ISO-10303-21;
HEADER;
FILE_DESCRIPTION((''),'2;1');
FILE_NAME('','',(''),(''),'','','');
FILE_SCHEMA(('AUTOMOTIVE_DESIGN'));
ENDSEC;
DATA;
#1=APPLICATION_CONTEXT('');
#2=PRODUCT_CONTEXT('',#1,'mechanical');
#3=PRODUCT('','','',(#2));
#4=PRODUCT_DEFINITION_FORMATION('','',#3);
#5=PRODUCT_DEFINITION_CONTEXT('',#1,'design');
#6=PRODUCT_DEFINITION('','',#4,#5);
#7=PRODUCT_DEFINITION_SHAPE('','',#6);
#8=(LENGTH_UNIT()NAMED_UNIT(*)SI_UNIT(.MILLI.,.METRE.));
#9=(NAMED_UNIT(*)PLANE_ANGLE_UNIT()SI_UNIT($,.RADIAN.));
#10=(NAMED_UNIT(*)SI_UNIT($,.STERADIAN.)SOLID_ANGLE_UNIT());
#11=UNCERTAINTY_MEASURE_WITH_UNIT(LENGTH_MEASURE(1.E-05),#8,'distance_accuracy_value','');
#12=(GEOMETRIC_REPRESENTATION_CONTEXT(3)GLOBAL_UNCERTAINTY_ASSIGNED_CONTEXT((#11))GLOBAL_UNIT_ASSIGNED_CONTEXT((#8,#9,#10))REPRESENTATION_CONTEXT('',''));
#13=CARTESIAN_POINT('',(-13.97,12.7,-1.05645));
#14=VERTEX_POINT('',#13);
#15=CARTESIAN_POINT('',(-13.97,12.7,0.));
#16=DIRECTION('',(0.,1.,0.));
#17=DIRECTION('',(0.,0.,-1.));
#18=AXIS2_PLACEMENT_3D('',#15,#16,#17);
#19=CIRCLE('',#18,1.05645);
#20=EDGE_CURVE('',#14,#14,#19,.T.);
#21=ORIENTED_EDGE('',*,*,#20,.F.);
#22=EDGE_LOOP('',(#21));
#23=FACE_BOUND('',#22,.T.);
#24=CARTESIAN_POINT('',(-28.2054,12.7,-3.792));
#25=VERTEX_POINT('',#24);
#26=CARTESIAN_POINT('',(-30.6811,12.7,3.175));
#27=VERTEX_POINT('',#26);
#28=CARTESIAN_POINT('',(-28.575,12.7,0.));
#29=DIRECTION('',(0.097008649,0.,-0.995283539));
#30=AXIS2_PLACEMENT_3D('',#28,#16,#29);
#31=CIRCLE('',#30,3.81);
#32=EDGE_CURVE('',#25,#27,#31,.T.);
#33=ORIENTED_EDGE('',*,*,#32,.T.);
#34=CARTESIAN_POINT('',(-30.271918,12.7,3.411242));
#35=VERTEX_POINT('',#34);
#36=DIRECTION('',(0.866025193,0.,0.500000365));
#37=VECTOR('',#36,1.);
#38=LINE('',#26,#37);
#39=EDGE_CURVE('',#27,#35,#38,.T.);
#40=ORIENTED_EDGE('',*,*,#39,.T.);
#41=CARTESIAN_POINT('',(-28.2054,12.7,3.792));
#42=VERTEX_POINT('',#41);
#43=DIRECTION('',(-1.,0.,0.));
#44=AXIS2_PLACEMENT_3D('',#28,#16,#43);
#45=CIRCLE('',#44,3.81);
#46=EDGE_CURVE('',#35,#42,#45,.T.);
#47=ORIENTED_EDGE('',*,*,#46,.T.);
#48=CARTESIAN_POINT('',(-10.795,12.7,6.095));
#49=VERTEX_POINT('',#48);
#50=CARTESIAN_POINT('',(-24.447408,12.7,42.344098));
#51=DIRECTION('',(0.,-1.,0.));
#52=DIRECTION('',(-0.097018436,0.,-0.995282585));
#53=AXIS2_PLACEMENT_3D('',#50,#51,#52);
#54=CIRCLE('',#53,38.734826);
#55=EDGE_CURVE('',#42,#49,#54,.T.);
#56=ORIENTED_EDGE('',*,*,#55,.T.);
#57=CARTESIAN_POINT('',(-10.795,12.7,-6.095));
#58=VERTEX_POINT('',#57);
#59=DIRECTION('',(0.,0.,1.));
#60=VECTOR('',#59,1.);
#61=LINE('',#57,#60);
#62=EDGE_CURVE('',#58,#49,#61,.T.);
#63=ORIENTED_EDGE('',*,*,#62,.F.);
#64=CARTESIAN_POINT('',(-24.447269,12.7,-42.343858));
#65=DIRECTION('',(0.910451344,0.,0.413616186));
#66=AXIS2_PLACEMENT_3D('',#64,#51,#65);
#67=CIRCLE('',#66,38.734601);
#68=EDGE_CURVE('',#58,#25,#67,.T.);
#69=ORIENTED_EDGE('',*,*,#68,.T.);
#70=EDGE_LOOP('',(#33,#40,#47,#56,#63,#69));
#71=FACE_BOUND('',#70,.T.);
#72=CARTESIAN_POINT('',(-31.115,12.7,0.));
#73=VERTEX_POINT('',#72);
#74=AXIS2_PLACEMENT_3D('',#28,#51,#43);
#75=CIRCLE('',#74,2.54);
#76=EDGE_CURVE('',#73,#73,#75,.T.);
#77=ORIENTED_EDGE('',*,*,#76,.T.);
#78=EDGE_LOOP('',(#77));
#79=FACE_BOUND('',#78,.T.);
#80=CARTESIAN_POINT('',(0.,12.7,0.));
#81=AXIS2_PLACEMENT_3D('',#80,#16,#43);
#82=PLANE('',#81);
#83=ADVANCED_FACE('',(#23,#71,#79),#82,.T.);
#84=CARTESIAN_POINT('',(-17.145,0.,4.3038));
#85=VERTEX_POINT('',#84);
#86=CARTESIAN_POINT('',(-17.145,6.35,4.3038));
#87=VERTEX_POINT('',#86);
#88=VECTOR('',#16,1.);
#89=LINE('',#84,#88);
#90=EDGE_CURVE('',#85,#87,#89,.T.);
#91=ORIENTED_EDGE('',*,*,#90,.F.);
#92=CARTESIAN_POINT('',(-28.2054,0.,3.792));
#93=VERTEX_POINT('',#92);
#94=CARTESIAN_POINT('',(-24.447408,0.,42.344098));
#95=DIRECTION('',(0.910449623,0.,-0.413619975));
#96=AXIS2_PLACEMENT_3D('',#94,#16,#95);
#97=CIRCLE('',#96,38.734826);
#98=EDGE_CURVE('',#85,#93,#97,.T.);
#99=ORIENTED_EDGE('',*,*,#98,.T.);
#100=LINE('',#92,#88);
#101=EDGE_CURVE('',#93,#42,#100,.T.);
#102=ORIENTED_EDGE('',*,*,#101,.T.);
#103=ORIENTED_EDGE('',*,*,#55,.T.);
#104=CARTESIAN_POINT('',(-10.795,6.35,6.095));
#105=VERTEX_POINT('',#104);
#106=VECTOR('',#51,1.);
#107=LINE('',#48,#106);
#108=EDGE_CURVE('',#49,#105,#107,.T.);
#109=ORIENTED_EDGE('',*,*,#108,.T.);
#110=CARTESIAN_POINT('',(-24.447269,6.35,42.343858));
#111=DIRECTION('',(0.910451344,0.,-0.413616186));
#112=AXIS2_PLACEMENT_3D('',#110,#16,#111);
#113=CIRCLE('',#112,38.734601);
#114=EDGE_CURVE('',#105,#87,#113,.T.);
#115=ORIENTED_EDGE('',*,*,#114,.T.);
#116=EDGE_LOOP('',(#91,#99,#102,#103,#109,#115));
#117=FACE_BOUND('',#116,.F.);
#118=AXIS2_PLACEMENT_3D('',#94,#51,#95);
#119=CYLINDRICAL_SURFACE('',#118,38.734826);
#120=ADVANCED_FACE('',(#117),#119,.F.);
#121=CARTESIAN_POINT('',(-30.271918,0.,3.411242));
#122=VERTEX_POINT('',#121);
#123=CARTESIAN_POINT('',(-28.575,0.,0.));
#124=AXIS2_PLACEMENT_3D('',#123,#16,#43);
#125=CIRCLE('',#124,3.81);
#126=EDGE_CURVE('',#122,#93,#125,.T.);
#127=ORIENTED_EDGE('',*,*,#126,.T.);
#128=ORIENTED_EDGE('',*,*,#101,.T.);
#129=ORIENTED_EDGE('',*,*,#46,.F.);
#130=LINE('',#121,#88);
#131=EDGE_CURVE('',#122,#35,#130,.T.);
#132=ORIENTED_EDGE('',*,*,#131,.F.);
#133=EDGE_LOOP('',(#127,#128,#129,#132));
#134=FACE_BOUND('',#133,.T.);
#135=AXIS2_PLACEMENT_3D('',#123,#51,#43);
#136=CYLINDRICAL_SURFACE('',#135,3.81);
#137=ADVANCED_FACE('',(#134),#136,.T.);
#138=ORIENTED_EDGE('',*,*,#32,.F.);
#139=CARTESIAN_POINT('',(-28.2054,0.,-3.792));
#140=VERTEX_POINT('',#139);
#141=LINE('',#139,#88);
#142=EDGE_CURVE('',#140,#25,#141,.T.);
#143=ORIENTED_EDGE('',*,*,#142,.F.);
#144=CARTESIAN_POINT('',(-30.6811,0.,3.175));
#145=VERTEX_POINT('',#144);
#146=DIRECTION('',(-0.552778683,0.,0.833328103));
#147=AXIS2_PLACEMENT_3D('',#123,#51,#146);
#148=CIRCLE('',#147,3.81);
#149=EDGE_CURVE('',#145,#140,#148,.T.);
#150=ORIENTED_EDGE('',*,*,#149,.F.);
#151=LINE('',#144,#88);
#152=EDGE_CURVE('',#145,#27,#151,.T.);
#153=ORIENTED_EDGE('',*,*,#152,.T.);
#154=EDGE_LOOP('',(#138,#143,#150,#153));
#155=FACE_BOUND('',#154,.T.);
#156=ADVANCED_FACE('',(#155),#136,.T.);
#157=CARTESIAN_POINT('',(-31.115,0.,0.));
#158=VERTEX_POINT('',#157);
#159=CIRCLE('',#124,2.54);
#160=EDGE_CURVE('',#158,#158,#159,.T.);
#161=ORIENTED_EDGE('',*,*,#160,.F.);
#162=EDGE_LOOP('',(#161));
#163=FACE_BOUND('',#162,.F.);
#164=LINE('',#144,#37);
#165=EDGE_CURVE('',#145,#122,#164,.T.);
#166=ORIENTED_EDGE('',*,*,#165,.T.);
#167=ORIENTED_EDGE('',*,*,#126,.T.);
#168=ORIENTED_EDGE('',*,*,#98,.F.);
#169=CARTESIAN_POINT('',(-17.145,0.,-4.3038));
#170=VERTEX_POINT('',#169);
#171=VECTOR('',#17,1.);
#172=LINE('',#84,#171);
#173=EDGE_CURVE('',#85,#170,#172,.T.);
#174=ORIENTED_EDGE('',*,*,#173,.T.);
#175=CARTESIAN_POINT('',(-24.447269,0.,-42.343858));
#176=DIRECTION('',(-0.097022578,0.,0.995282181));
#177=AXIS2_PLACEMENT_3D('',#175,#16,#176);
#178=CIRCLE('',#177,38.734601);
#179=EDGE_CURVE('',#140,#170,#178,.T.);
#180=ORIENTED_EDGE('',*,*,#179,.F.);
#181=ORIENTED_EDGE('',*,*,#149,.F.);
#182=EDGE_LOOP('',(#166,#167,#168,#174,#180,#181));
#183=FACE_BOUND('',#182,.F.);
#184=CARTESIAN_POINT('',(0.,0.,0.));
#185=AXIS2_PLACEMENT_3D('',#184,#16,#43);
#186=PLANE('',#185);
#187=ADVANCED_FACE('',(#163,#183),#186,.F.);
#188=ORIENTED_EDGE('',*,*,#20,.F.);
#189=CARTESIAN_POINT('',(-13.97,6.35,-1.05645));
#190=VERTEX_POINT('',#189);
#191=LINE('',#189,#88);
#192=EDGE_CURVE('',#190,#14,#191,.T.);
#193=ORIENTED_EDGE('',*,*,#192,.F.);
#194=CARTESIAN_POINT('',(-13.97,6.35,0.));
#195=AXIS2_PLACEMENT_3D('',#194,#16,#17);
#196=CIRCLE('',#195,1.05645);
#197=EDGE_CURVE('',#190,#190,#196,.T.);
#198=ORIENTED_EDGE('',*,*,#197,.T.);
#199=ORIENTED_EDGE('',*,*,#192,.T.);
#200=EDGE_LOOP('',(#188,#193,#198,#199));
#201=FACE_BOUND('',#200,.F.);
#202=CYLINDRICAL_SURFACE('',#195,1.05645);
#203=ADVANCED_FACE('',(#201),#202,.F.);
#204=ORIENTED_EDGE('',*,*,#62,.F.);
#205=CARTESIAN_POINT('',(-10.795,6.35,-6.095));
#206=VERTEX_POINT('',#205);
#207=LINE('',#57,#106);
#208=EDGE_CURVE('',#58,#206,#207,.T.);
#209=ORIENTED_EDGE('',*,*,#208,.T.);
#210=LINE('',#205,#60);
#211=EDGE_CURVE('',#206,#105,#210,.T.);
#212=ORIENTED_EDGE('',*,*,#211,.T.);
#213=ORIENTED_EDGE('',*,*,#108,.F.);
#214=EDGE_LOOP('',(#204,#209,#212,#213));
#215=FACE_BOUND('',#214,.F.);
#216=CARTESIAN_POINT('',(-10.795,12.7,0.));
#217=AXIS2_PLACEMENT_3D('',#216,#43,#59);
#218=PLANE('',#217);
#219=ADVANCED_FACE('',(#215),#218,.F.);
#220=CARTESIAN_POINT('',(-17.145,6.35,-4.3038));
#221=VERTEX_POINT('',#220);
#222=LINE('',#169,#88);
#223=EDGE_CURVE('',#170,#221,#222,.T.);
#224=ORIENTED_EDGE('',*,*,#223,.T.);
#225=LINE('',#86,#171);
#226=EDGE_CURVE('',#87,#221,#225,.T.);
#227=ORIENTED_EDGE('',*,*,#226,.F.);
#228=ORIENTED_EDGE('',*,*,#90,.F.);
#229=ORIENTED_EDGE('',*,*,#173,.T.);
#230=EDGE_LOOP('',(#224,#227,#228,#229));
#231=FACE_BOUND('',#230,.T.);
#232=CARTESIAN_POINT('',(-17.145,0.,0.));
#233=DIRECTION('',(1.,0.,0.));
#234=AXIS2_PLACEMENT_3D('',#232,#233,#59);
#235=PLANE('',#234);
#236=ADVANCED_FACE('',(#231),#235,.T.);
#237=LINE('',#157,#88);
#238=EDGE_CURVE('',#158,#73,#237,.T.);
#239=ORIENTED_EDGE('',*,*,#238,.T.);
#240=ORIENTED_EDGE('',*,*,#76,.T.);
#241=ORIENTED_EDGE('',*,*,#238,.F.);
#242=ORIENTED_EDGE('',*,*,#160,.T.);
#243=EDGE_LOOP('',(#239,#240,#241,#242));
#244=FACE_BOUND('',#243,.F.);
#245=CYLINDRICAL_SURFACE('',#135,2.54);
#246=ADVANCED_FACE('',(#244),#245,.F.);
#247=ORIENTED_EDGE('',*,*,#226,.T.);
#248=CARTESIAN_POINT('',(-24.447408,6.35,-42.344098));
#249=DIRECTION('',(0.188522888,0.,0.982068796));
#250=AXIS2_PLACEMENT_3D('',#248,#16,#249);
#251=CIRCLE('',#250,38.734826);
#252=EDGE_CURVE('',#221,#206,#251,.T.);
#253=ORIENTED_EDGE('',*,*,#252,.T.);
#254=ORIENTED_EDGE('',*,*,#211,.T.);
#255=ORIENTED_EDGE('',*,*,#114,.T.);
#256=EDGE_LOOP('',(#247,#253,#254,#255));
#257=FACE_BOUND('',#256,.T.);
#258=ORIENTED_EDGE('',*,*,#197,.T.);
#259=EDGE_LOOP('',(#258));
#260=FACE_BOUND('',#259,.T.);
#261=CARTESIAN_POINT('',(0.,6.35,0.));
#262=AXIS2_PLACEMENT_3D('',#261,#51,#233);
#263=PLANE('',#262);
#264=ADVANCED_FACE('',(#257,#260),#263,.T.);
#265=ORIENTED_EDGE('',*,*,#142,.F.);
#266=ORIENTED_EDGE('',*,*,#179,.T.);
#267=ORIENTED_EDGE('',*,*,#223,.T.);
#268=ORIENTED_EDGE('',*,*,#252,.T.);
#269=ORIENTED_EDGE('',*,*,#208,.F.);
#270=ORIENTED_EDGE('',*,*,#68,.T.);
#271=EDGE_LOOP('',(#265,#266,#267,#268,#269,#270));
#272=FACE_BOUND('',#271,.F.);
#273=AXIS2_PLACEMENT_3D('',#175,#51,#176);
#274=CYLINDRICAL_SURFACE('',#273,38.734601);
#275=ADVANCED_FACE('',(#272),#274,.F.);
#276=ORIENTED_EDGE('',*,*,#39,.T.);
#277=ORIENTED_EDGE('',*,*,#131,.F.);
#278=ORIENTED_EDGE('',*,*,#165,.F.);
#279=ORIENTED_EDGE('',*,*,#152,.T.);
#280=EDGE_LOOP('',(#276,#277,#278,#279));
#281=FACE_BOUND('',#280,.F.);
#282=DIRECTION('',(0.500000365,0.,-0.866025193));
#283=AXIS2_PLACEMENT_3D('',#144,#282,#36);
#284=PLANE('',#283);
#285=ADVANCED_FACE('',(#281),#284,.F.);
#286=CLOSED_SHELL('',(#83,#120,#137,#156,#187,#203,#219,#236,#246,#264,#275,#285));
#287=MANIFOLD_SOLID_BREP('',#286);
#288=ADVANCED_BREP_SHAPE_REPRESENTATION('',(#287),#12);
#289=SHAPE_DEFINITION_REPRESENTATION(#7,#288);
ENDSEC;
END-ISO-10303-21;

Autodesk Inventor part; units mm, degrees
ref_plane "YZ Plane" through (0, 0, 0) normal (1, 0, 0) x (0, 1, 0)
ref_plane "XZ Plane" through (0, 0, 0) normal (0, 1, 0) x (-1, 0, 0)
ref_plane "XY Plane" through (0, 0, 0) normal (0, 0, 1) x (1, 0, 0)
sketch "Sketch1" plane through (0, 0, 0) normal (0, 1, 0) x (-1, 0, 0)
  line L0 (0, 0) -> (28.575, 0)
  line L1 (28.575, 0) -> (0, 0)
  line L2 (0, 0) -> (-14.2875, -24.7467)
  line L3 (0, 0) -> (28.575, 0) construction
  line L4 (0, 0) -> (-14.2875, 24.7467)
  line L5 (0, 0) -> (28.575, 0) construction
  circle A0 centre (28.575, 0) radius 2.54
  circle A1 centre (-14.2875, -24.7467) radius 2.54
  circle A2 centre (-14.2875, 24.7467) radius 2.54
  circle A3 centre (0, 0) radius 3.175
  circle A4 centre (0, 0) radius 6.35
  line L6 (-1.5875, -2.7496) -> (0, 0)
  line L7 (0, 0) -> (-6.35, 0)
  circle A5 centre (-14.2875, 24.7467) radius 3.81
  circle A6 centre (28.575, 0) radius 3.81
  circle A7 centre (-14.2875, -24.7467) radius 3.81
  line L8 (30.6811, 3.175) -> (-12.1814, 27.9217)
  line L9 (28.2054, -3.792) -> (-10.8187, -26.3226)
  line L10 (-18.0975, 24.7467) -> (-18.0975, -24.7467)
  line L11 (0, 0) -> (5.0525, -8.8146)
  line L12 (0, 0) -> (5.1463, 8.7602)
  line L13 (0, 0) -> (-10.16, 0)
  arc A8 (28.2054, -3.792) -> (-10.8187, -26.3226) centre (24.4473, -42.344) ccw
  arc A9 (-10.8187, 26.3226) -> (28.2054, 3.792) centre (24.4473, 42.344) ccw
  arc A10 (-17.3867, -22.5305) -> (-17.3867, 22.5305) centre (-48.8947, 0) ccw
  point P0 (5.1074, 8.7829)
  point P1 (-10.16, 0.0317)
  point P2 (30.2716, 3.4114)
  point P3 (28.2054, 3.792)
  point P4 (-10.8187, 26.3226)
  point P5 (-17.3867, 22.5305)
  point P6 (-17.3867, -22.5305)
  dimension "d9" = 6.35
  dimension "d41" = 12.7
  dimension "d0" = 28.575
  dimension "d1" = 28.575
  dimension "d2" = 120
  dimension "d3" = 28.575
  dimension "d4" = 120
  dimension "d5" = 5.08
  dimension "d6" = 5.08
  dimension "d7" = 5.08
  dimension "d42" = 7.62
  dimension "d43" = 7.62
  dimension "d44" = 7.62
  dimension "d47" = 10.16
  dimension "d48" = 10.16
  dimension "d49" = 10.16
  dimension "d52" = 360
extrude "Extrusion4" add sketch "Sketch1" along normal blind 12.7 contours A3 L12 A4 L0 | L0 A4 L11 A3 | A3 L11 A4 L2 | L2 A4 L7 A3 | A3 L7 A4 L4 | L4 A4 L12 A3 | A4 L12 A9 A6 L0 | L0 A6 A8 L11 A4 | A4 L11 A8 A7 L2 | L2 A7 A10 L13 A4 | A4 L13 A10 A5 L4 | L4 A5 A9 L12 A4 | A6 L8 | A7 | A5 picked at (31.8987, 0.5122)
sketch "Sketch21" plane through (0, 12.7, 0) normal (0, 1, 0) x (1, 0, 0)
  circle A0 centre (-28.575, 0) radius 2.54 projected
  arc A1 (-28.2054, 3.792) -> (10.8187, 26.3226) centre (-24.4473, 42.344) ccw projected
  arc A2 (10.8187, -26.3226) -> (-28.2054, -3.792) centre (-24.4473, -42.344) ccw projected
  arc A3 (-28.2054, 3.792) -> (10.8187, 26.3226) centre (-24.4473, 42.344) ccw projected
  arc A4 (-28.2054, 3.792) -> (-30.6811, -3.175) centre (-28.575, 0) ccw projected
  line L0 (-30.6811, -3.175) -> (-30.2716, -3.4114) projected
  arc A5 (-30.2716, -3.4114) -> (-28.2054, -3.792) centre (-28.575, 0) ccw projected
  arc A6 (10.8187, -26.3226) -> (-28.2054, -3.792) centre (-24.4473, -42.344) ccw projected
  arc A7 (10.8187, -26.3226) -> (17.3867, -22.5305) centre (14.2875, -24.7467) ccw projected
  arc A8 (17.3867, 22.5305) -> (17.3867, -22.5305) centre (48.8947, 0) ccw projected
  arc A9 (17.3867, 22.5305) -> (10.8187, 26.3226) centre (14.2875, 24.7467) ccw projected
  circle A10 centre (-28.575, 0) radius 2.54 projected
  circle A11 centre (0, 0) radius 3.175 projected
  circle A12 centre (14.2875, -24.7467) radius 2.54 projected
  circle A13 centre (14.2875, 24.7467) radius 2.54 projected
  line L1 (0, 0) -> (-13.6784, 0)
  line L2 (-13.6784, 0) -> (-28.575, 0)
  line L3 (0, 0) -> (-10.795, 0)
  line L4 (-10.795, 0) -> (-10.795, 6.095)
  arc A14 (-28.2054, 3.792) -> (10.8187, 26.3226) centre (-24.4473, 42.344) ccw projected
  line L5 (-10.795, 0) -> (-10.795, -6.095)
  point P0 (10.8187, -26.3226)
  point P1 (10.8187, 26.3226)
  dimension "d107" = 10.795
sketch "Sketch22" plane through (0, 0, 0) normal (0, -1, 0) x (1, 0, 0)
  line L0 (0, 0) -> (-17.145, 0)
  line L1 (-17.145, 0) -> (-17.145, -4.3038)
  arc A0 (10.8187, -26.3226) -> (-28.2054, -3.792) centre (-24.4473, -42.344) ccw projected
  line L2 (-17.145, 0) -> (-17.145, 4.3038)
  arc A1 (-28.2054, 3.792) -> (10.8187, 26.3226) centre (-24.4473, 42.344) ccw projected
  arc A2 (10.8187, -26.3226) -> (-28.2054, -3.792) centre (-24.4473, -42.344) ccw projected
  arc A3 (10.8187, -26.3226) -> (17.3867, -22.5305) centre (14.2875, -24.7467) ccw projected
  arc A4 (17.3867, 22.5305) -> (17.3867, -22.5305) centre (48.8947, 0) ccw projected
  arc A5 (17.3867, 22.5305) -> (10.8187, 26.3226) centre (14.2875, 24.7467) ccw projected
  arc A6 (-28.2054, 3.792) -> (10.8187, 26.3226) centre (-24.4473, 42.344) ccw projected
  arc A7 (-28.2054, 3.792) -> (-30.2716, 3.4114) centre (-28.575, 0) ccw projected
  line L3 (-30.6811, 3.175) -> (-30.2716, 3.4114) projected
  arc A8 (-30.6811, 3.175) -> (-28.2054, -3.792) centre (-28.575, 0) ccw projected
  circle A9 centre (-28.575, 0) radius 2.54 projected
  circle A10 centre (0, 0) radius 3.175 projected
  circle A11 centre (14.2875, 24.7467) radius 2.54 projected
  circle A12 centre (14.2875, -24.7467) radius 2.54 projected
  point P0 (10.8187, -26.3226)
  point P1 (10.8187, 26.3226)
  dimension "d108" = 17.145
extrude "Extrusion10" cut sketch "Sketch22" against normal blind 6.35 contours L2 A1 A5 A4 A3 A0 L1
extrude "Extrusion11" cut sketch "Sketch21" against normal blind 6.35 contours A1 A9 A8 A7 A2 L5 L4
sketch "Sketch23" plane through (0, 12.7, 0) normal (0, 1, 0) x (1, 0, 0)
  point P0 (0, 0)
sketch "Sketch24" plane through (0, 6.35, 0) normal (0, -1, 0) x (1, 0, 0)
  line L0 (-17.145, -4.3038) -> (-17.145, 4.3038) projected
  line L1 (-17.145, 0) -> (-10.795, 0)
  line L2 (-10.795, -6.095) -> (-10.795, 6.095) projected
  line L3 (-13.97, 0) -> (-13.97, 5.0532)
  arc A0 (-17.145, 4.3038) -> (-10.795, 6.095) centre (-24.4473, 42.344) ccw projected
  line L4 (-13.97, 0) -> (-13.97, -5.0532)
  arc A1 (-10.795, -6.095) -> (-17.145, -4.3038) centre (-24.4473, -42.344) ccw projected
  point P0 (0, 0)
hole "Hole8" at (-13.97, 6.35, 0) direction (0, 1, 0) diameter 2.1129 depth 7.7978 thread size "M2.6x0.45" class "6H" standard "ISO Metric profile"
properties part number "stability copy2"
